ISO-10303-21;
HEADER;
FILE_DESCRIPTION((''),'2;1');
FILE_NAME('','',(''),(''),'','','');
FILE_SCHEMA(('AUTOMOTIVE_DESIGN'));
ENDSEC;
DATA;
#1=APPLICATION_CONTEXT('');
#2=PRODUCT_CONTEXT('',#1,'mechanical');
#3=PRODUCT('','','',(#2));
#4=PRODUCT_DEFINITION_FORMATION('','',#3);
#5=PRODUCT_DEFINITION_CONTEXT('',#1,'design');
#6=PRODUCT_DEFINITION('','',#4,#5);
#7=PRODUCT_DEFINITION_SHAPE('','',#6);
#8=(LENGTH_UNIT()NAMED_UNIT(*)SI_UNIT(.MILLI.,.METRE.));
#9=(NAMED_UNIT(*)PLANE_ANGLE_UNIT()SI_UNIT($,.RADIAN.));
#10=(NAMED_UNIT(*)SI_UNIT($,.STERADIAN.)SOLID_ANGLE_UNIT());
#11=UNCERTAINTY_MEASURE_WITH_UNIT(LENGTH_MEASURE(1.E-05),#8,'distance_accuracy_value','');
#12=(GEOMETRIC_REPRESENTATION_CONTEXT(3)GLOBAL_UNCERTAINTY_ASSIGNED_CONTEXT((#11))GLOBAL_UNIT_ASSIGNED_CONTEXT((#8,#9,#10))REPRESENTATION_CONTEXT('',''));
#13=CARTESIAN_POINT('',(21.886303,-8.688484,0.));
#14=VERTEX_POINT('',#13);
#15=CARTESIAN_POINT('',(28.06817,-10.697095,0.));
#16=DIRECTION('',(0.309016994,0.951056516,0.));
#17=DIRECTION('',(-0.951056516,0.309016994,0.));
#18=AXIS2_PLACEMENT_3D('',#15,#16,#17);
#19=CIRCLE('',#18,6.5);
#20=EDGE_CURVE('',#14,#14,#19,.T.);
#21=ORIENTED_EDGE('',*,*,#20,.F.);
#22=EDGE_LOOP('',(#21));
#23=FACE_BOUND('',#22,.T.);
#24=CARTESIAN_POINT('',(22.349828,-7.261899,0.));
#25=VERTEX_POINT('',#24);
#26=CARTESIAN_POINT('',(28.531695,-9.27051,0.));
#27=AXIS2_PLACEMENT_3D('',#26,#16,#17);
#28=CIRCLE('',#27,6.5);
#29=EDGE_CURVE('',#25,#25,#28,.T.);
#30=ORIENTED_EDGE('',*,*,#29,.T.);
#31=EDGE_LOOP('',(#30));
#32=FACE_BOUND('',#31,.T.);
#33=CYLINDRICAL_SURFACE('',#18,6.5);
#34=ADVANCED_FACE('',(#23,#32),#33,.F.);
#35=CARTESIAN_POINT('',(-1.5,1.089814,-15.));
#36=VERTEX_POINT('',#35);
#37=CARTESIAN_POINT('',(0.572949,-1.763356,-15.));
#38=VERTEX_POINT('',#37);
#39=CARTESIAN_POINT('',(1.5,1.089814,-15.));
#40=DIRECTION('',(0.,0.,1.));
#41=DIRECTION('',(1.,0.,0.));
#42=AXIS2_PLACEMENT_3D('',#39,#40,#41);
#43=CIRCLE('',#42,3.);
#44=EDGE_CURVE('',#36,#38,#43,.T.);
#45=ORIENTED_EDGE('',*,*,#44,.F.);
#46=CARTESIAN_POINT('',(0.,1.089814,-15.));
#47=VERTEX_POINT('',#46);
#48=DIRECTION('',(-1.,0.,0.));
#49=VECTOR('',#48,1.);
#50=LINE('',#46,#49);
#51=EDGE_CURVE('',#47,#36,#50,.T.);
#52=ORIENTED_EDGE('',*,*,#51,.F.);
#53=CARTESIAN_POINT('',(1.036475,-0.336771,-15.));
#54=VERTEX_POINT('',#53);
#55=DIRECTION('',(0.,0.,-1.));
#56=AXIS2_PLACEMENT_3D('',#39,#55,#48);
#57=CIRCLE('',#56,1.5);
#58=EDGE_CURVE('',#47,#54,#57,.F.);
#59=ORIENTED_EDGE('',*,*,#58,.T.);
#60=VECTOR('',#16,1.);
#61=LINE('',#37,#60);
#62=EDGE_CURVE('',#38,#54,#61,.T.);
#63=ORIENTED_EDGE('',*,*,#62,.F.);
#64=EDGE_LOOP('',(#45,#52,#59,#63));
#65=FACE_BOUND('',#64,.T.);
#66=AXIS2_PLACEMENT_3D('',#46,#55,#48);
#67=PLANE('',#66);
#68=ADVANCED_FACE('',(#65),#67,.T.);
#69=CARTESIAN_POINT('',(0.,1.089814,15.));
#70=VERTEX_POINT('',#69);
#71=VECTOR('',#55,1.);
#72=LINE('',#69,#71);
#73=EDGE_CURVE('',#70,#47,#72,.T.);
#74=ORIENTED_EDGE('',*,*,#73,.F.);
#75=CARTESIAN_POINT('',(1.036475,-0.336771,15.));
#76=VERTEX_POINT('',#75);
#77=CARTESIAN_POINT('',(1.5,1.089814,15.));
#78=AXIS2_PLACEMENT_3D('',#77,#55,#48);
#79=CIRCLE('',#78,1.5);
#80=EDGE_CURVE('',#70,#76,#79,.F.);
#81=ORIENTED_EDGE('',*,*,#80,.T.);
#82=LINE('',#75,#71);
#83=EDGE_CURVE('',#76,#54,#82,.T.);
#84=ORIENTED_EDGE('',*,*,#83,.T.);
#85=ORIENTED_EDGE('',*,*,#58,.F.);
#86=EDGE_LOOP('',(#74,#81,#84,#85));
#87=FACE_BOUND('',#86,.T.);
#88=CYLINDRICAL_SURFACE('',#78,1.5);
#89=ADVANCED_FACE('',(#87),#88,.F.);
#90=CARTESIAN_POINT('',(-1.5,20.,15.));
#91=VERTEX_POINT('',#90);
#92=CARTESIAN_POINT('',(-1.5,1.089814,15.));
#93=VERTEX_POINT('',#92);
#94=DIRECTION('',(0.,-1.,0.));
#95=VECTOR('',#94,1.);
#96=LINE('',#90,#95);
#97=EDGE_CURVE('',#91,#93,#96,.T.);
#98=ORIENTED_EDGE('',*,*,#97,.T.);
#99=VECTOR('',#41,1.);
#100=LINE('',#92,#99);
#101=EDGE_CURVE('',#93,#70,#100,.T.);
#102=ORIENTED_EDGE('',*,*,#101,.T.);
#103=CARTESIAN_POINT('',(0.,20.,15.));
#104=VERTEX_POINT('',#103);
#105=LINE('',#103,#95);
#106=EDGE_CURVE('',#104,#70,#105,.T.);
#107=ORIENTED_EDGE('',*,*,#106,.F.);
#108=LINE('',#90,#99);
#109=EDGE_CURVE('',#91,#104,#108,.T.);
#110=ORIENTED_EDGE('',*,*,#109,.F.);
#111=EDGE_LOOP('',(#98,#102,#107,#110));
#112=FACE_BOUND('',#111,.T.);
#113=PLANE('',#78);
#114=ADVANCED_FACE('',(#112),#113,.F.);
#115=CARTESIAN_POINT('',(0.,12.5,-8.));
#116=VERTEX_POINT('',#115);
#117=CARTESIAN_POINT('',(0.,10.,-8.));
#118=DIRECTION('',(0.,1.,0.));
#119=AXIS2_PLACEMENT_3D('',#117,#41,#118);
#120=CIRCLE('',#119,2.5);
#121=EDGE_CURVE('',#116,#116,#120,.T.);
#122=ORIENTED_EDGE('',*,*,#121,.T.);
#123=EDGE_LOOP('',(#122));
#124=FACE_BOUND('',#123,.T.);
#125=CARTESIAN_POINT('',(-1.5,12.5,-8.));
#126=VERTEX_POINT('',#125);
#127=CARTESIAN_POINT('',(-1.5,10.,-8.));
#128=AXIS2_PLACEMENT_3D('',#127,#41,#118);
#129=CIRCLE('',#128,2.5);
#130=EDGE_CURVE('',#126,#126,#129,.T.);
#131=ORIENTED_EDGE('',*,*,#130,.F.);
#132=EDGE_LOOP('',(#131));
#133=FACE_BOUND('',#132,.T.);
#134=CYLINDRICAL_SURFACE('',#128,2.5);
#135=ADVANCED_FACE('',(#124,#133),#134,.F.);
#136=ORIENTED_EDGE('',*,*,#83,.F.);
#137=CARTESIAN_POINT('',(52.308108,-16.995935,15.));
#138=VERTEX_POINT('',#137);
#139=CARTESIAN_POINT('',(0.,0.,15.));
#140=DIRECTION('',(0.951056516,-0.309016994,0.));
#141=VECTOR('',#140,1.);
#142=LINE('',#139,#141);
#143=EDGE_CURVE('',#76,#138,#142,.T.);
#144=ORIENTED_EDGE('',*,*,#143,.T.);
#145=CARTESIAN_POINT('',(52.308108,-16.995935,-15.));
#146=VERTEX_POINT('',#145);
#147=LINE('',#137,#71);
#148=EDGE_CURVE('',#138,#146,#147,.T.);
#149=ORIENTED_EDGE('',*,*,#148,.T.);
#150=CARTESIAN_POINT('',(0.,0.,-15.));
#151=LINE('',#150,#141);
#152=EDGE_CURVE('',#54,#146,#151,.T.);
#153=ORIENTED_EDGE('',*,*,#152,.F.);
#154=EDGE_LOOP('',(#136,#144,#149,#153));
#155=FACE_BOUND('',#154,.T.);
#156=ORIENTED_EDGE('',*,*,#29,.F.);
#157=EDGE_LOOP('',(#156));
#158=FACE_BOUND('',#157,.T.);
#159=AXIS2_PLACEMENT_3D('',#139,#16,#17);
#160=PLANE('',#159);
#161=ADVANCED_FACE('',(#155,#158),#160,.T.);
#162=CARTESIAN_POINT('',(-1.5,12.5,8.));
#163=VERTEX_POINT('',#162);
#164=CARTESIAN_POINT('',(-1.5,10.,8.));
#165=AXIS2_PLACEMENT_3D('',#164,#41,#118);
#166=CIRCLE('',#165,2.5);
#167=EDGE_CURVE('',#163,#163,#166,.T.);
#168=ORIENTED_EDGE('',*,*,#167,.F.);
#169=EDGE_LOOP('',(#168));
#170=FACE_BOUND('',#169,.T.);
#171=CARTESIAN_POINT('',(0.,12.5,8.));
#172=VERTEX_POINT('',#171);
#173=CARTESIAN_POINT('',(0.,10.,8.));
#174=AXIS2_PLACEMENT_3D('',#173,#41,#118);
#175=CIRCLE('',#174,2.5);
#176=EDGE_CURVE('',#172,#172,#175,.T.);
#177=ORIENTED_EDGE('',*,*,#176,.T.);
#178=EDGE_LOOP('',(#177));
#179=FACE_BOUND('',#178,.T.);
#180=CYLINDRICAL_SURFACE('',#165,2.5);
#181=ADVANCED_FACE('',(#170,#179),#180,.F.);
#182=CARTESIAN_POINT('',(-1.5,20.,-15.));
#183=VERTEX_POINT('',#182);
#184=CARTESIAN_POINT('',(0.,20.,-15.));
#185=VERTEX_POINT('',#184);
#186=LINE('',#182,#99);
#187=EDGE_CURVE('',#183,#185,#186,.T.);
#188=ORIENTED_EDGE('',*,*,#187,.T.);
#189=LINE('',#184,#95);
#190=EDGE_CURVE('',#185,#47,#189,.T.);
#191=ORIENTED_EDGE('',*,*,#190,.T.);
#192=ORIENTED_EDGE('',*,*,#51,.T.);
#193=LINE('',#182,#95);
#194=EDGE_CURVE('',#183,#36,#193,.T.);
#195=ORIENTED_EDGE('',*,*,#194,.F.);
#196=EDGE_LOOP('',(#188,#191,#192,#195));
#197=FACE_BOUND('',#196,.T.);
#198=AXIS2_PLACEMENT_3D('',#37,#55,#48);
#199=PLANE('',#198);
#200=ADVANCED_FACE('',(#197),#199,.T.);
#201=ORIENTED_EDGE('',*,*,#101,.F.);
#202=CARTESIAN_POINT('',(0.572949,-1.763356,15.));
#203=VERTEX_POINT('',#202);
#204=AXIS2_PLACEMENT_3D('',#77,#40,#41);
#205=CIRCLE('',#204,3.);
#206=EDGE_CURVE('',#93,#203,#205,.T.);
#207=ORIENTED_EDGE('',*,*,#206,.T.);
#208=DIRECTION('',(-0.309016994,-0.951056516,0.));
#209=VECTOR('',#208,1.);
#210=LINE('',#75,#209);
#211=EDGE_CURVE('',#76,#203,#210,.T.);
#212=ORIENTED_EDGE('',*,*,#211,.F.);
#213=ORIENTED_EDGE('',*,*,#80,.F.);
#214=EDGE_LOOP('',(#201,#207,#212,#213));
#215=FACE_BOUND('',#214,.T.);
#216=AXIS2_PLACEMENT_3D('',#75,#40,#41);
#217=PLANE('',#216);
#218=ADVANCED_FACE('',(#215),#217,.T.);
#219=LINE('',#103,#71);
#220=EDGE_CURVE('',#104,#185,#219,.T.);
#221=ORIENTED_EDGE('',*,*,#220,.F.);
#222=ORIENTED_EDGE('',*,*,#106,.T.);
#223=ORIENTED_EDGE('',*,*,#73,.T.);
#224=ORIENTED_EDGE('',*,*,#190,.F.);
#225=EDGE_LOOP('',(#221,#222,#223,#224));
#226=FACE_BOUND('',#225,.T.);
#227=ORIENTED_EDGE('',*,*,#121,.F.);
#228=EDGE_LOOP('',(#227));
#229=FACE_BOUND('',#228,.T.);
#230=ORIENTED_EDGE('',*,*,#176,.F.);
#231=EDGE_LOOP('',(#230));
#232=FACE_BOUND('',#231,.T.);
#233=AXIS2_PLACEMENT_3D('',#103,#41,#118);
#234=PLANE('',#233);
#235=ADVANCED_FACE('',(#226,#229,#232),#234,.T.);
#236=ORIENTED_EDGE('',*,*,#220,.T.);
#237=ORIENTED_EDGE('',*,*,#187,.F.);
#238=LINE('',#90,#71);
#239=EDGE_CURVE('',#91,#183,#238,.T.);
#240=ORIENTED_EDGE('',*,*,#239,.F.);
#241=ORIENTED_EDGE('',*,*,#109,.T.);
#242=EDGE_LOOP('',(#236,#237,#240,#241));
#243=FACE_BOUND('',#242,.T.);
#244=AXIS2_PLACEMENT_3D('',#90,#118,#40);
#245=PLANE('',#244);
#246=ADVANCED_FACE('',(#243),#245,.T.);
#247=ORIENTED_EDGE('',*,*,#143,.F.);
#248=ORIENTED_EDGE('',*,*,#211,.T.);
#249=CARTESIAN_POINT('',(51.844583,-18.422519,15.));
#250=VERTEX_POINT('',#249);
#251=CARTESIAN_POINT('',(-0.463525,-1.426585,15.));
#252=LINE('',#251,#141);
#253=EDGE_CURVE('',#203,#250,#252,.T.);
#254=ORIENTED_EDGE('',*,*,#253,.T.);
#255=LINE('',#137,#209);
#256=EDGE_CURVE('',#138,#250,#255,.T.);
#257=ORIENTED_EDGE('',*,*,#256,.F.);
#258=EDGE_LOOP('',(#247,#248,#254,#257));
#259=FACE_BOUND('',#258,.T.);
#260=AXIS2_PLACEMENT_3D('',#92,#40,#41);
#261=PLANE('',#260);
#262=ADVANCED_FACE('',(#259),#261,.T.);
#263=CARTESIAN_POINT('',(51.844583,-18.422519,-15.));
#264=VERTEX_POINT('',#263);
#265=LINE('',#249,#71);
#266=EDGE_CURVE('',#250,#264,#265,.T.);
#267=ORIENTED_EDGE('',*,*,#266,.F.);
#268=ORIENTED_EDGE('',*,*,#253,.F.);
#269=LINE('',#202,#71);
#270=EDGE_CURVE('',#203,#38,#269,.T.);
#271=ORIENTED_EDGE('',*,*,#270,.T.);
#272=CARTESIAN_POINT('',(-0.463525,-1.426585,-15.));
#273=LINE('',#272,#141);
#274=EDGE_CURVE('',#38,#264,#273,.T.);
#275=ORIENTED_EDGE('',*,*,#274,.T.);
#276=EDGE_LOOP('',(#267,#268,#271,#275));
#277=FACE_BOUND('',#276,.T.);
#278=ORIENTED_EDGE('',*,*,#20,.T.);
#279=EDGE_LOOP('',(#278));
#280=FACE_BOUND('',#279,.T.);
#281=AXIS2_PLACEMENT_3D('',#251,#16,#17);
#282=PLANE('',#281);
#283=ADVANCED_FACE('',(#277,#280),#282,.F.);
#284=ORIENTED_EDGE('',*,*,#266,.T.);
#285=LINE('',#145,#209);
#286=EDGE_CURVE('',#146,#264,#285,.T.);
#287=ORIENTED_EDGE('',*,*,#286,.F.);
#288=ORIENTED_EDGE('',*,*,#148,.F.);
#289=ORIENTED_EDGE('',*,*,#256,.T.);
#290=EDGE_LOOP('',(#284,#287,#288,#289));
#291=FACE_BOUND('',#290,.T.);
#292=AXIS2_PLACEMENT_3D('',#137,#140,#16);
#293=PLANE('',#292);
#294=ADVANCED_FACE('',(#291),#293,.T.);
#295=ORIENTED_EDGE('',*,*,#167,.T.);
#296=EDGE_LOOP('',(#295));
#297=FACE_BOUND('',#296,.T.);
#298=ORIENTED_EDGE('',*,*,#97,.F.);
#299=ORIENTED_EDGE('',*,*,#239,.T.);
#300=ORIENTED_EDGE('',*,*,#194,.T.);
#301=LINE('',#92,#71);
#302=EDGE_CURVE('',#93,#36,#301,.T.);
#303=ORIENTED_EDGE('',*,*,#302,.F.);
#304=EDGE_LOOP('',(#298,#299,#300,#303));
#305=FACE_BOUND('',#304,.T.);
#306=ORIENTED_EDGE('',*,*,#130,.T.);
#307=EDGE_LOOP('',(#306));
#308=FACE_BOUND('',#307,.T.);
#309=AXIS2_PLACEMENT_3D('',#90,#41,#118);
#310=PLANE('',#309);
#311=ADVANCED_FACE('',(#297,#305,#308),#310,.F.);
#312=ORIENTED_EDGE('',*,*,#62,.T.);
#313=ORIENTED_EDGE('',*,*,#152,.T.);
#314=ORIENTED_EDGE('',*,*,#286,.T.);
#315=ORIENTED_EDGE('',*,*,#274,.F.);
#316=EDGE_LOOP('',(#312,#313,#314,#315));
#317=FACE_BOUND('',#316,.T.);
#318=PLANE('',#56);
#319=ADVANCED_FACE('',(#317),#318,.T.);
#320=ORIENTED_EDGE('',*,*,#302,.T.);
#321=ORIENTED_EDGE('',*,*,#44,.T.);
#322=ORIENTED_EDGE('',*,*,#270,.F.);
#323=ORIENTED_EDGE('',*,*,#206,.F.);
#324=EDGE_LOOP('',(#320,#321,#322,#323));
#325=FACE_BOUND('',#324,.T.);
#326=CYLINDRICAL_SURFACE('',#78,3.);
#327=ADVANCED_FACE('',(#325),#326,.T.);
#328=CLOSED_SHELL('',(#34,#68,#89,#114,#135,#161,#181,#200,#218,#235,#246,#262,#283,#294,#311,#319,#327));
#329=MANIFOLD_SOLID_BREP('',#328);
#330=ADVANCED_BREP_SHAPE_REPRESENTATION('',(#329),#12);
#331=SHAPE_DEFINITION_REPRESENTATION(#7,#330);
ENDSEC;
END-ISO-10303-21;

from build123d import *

# Parameters (mm, degrees)
SM_BASE_FLANGE_1_DEPTH = 15
SKETCH_6_R             = 2.5
CUT_EXTRUDE_664_DEPTH  = 10
SKETCH_7_R             = 6.5
CUT_EXTRUDE_2_DEPTH    = 10


# Sheet-metal steps are written as plain solids
with BuildPart() as part:
    # Sketch 1 → Базовая кромка1 (new, symmetric)
    with BuildSketch(Plane.XY):
        with BuildLine():
            Line((0, 20), (0, 1.089813792))
            ThreePointArc((0, 1.089813792), (0.286474508, 0.208135914), (1.036474508, -0.336770982))
            Line((1.036474508, -0.336770982), (52.308108396, -16.995934691))
            Line((52.308108396, -16.995934691), (51.844582905, -18.422519465))
            Line((51.844582905, -18.422519465), (0.572949017, -1.763355757))
            ThreePointArc((0.572949017, -1.763355757), (-0.927050983, -0.673541965), (-1.5, 1.089813792))
            Line((-1.5, 1.089813792), (-1.5, 20))
            Line((-1.5, 20), (0, 20))
        make_face()
    extrude(amount=SM_BASE_FLANGE_1_DEPTH, both=True)

    # Эскиз6 → Cut-Extrude 664 (cut)
    with BuildSketch(Plane(origin=(0, 0, 0), x_dir=(0, 0, -1), z_dir=(1, 0, 0))):
        with Locations(Location((-8, 10, 0), (0, 0, 90))):
            Circle(SKETCH_6_R)
        with Locations(Location((8, 10, 0), (0, 0, 90))):
            Circle(SKETCH_6_R)
    extrude(amount=-CUT_EXTRUDE_664_DEPTH, mode=Mode.SUBTRACT)

    # Эскиз7 → Вырез-Вытянуть2 (cut)
    with BuildSketch(Plane(origin=(0, 0, 0), x_dir=(0.9510565162951546, -0.3090169943749447, 0), z_dir=(0.3090169943749447, 0.9510565162951546, 0))):
        with Locations(Location((30, 0, 0), (0, 0, 180))):
            Circle(SKETCH_7_R)
    extrude(amount=-CUT_EXTRUDE_2_DEPTH, mode=Mode.SUBTRACT)


solid = part.part
